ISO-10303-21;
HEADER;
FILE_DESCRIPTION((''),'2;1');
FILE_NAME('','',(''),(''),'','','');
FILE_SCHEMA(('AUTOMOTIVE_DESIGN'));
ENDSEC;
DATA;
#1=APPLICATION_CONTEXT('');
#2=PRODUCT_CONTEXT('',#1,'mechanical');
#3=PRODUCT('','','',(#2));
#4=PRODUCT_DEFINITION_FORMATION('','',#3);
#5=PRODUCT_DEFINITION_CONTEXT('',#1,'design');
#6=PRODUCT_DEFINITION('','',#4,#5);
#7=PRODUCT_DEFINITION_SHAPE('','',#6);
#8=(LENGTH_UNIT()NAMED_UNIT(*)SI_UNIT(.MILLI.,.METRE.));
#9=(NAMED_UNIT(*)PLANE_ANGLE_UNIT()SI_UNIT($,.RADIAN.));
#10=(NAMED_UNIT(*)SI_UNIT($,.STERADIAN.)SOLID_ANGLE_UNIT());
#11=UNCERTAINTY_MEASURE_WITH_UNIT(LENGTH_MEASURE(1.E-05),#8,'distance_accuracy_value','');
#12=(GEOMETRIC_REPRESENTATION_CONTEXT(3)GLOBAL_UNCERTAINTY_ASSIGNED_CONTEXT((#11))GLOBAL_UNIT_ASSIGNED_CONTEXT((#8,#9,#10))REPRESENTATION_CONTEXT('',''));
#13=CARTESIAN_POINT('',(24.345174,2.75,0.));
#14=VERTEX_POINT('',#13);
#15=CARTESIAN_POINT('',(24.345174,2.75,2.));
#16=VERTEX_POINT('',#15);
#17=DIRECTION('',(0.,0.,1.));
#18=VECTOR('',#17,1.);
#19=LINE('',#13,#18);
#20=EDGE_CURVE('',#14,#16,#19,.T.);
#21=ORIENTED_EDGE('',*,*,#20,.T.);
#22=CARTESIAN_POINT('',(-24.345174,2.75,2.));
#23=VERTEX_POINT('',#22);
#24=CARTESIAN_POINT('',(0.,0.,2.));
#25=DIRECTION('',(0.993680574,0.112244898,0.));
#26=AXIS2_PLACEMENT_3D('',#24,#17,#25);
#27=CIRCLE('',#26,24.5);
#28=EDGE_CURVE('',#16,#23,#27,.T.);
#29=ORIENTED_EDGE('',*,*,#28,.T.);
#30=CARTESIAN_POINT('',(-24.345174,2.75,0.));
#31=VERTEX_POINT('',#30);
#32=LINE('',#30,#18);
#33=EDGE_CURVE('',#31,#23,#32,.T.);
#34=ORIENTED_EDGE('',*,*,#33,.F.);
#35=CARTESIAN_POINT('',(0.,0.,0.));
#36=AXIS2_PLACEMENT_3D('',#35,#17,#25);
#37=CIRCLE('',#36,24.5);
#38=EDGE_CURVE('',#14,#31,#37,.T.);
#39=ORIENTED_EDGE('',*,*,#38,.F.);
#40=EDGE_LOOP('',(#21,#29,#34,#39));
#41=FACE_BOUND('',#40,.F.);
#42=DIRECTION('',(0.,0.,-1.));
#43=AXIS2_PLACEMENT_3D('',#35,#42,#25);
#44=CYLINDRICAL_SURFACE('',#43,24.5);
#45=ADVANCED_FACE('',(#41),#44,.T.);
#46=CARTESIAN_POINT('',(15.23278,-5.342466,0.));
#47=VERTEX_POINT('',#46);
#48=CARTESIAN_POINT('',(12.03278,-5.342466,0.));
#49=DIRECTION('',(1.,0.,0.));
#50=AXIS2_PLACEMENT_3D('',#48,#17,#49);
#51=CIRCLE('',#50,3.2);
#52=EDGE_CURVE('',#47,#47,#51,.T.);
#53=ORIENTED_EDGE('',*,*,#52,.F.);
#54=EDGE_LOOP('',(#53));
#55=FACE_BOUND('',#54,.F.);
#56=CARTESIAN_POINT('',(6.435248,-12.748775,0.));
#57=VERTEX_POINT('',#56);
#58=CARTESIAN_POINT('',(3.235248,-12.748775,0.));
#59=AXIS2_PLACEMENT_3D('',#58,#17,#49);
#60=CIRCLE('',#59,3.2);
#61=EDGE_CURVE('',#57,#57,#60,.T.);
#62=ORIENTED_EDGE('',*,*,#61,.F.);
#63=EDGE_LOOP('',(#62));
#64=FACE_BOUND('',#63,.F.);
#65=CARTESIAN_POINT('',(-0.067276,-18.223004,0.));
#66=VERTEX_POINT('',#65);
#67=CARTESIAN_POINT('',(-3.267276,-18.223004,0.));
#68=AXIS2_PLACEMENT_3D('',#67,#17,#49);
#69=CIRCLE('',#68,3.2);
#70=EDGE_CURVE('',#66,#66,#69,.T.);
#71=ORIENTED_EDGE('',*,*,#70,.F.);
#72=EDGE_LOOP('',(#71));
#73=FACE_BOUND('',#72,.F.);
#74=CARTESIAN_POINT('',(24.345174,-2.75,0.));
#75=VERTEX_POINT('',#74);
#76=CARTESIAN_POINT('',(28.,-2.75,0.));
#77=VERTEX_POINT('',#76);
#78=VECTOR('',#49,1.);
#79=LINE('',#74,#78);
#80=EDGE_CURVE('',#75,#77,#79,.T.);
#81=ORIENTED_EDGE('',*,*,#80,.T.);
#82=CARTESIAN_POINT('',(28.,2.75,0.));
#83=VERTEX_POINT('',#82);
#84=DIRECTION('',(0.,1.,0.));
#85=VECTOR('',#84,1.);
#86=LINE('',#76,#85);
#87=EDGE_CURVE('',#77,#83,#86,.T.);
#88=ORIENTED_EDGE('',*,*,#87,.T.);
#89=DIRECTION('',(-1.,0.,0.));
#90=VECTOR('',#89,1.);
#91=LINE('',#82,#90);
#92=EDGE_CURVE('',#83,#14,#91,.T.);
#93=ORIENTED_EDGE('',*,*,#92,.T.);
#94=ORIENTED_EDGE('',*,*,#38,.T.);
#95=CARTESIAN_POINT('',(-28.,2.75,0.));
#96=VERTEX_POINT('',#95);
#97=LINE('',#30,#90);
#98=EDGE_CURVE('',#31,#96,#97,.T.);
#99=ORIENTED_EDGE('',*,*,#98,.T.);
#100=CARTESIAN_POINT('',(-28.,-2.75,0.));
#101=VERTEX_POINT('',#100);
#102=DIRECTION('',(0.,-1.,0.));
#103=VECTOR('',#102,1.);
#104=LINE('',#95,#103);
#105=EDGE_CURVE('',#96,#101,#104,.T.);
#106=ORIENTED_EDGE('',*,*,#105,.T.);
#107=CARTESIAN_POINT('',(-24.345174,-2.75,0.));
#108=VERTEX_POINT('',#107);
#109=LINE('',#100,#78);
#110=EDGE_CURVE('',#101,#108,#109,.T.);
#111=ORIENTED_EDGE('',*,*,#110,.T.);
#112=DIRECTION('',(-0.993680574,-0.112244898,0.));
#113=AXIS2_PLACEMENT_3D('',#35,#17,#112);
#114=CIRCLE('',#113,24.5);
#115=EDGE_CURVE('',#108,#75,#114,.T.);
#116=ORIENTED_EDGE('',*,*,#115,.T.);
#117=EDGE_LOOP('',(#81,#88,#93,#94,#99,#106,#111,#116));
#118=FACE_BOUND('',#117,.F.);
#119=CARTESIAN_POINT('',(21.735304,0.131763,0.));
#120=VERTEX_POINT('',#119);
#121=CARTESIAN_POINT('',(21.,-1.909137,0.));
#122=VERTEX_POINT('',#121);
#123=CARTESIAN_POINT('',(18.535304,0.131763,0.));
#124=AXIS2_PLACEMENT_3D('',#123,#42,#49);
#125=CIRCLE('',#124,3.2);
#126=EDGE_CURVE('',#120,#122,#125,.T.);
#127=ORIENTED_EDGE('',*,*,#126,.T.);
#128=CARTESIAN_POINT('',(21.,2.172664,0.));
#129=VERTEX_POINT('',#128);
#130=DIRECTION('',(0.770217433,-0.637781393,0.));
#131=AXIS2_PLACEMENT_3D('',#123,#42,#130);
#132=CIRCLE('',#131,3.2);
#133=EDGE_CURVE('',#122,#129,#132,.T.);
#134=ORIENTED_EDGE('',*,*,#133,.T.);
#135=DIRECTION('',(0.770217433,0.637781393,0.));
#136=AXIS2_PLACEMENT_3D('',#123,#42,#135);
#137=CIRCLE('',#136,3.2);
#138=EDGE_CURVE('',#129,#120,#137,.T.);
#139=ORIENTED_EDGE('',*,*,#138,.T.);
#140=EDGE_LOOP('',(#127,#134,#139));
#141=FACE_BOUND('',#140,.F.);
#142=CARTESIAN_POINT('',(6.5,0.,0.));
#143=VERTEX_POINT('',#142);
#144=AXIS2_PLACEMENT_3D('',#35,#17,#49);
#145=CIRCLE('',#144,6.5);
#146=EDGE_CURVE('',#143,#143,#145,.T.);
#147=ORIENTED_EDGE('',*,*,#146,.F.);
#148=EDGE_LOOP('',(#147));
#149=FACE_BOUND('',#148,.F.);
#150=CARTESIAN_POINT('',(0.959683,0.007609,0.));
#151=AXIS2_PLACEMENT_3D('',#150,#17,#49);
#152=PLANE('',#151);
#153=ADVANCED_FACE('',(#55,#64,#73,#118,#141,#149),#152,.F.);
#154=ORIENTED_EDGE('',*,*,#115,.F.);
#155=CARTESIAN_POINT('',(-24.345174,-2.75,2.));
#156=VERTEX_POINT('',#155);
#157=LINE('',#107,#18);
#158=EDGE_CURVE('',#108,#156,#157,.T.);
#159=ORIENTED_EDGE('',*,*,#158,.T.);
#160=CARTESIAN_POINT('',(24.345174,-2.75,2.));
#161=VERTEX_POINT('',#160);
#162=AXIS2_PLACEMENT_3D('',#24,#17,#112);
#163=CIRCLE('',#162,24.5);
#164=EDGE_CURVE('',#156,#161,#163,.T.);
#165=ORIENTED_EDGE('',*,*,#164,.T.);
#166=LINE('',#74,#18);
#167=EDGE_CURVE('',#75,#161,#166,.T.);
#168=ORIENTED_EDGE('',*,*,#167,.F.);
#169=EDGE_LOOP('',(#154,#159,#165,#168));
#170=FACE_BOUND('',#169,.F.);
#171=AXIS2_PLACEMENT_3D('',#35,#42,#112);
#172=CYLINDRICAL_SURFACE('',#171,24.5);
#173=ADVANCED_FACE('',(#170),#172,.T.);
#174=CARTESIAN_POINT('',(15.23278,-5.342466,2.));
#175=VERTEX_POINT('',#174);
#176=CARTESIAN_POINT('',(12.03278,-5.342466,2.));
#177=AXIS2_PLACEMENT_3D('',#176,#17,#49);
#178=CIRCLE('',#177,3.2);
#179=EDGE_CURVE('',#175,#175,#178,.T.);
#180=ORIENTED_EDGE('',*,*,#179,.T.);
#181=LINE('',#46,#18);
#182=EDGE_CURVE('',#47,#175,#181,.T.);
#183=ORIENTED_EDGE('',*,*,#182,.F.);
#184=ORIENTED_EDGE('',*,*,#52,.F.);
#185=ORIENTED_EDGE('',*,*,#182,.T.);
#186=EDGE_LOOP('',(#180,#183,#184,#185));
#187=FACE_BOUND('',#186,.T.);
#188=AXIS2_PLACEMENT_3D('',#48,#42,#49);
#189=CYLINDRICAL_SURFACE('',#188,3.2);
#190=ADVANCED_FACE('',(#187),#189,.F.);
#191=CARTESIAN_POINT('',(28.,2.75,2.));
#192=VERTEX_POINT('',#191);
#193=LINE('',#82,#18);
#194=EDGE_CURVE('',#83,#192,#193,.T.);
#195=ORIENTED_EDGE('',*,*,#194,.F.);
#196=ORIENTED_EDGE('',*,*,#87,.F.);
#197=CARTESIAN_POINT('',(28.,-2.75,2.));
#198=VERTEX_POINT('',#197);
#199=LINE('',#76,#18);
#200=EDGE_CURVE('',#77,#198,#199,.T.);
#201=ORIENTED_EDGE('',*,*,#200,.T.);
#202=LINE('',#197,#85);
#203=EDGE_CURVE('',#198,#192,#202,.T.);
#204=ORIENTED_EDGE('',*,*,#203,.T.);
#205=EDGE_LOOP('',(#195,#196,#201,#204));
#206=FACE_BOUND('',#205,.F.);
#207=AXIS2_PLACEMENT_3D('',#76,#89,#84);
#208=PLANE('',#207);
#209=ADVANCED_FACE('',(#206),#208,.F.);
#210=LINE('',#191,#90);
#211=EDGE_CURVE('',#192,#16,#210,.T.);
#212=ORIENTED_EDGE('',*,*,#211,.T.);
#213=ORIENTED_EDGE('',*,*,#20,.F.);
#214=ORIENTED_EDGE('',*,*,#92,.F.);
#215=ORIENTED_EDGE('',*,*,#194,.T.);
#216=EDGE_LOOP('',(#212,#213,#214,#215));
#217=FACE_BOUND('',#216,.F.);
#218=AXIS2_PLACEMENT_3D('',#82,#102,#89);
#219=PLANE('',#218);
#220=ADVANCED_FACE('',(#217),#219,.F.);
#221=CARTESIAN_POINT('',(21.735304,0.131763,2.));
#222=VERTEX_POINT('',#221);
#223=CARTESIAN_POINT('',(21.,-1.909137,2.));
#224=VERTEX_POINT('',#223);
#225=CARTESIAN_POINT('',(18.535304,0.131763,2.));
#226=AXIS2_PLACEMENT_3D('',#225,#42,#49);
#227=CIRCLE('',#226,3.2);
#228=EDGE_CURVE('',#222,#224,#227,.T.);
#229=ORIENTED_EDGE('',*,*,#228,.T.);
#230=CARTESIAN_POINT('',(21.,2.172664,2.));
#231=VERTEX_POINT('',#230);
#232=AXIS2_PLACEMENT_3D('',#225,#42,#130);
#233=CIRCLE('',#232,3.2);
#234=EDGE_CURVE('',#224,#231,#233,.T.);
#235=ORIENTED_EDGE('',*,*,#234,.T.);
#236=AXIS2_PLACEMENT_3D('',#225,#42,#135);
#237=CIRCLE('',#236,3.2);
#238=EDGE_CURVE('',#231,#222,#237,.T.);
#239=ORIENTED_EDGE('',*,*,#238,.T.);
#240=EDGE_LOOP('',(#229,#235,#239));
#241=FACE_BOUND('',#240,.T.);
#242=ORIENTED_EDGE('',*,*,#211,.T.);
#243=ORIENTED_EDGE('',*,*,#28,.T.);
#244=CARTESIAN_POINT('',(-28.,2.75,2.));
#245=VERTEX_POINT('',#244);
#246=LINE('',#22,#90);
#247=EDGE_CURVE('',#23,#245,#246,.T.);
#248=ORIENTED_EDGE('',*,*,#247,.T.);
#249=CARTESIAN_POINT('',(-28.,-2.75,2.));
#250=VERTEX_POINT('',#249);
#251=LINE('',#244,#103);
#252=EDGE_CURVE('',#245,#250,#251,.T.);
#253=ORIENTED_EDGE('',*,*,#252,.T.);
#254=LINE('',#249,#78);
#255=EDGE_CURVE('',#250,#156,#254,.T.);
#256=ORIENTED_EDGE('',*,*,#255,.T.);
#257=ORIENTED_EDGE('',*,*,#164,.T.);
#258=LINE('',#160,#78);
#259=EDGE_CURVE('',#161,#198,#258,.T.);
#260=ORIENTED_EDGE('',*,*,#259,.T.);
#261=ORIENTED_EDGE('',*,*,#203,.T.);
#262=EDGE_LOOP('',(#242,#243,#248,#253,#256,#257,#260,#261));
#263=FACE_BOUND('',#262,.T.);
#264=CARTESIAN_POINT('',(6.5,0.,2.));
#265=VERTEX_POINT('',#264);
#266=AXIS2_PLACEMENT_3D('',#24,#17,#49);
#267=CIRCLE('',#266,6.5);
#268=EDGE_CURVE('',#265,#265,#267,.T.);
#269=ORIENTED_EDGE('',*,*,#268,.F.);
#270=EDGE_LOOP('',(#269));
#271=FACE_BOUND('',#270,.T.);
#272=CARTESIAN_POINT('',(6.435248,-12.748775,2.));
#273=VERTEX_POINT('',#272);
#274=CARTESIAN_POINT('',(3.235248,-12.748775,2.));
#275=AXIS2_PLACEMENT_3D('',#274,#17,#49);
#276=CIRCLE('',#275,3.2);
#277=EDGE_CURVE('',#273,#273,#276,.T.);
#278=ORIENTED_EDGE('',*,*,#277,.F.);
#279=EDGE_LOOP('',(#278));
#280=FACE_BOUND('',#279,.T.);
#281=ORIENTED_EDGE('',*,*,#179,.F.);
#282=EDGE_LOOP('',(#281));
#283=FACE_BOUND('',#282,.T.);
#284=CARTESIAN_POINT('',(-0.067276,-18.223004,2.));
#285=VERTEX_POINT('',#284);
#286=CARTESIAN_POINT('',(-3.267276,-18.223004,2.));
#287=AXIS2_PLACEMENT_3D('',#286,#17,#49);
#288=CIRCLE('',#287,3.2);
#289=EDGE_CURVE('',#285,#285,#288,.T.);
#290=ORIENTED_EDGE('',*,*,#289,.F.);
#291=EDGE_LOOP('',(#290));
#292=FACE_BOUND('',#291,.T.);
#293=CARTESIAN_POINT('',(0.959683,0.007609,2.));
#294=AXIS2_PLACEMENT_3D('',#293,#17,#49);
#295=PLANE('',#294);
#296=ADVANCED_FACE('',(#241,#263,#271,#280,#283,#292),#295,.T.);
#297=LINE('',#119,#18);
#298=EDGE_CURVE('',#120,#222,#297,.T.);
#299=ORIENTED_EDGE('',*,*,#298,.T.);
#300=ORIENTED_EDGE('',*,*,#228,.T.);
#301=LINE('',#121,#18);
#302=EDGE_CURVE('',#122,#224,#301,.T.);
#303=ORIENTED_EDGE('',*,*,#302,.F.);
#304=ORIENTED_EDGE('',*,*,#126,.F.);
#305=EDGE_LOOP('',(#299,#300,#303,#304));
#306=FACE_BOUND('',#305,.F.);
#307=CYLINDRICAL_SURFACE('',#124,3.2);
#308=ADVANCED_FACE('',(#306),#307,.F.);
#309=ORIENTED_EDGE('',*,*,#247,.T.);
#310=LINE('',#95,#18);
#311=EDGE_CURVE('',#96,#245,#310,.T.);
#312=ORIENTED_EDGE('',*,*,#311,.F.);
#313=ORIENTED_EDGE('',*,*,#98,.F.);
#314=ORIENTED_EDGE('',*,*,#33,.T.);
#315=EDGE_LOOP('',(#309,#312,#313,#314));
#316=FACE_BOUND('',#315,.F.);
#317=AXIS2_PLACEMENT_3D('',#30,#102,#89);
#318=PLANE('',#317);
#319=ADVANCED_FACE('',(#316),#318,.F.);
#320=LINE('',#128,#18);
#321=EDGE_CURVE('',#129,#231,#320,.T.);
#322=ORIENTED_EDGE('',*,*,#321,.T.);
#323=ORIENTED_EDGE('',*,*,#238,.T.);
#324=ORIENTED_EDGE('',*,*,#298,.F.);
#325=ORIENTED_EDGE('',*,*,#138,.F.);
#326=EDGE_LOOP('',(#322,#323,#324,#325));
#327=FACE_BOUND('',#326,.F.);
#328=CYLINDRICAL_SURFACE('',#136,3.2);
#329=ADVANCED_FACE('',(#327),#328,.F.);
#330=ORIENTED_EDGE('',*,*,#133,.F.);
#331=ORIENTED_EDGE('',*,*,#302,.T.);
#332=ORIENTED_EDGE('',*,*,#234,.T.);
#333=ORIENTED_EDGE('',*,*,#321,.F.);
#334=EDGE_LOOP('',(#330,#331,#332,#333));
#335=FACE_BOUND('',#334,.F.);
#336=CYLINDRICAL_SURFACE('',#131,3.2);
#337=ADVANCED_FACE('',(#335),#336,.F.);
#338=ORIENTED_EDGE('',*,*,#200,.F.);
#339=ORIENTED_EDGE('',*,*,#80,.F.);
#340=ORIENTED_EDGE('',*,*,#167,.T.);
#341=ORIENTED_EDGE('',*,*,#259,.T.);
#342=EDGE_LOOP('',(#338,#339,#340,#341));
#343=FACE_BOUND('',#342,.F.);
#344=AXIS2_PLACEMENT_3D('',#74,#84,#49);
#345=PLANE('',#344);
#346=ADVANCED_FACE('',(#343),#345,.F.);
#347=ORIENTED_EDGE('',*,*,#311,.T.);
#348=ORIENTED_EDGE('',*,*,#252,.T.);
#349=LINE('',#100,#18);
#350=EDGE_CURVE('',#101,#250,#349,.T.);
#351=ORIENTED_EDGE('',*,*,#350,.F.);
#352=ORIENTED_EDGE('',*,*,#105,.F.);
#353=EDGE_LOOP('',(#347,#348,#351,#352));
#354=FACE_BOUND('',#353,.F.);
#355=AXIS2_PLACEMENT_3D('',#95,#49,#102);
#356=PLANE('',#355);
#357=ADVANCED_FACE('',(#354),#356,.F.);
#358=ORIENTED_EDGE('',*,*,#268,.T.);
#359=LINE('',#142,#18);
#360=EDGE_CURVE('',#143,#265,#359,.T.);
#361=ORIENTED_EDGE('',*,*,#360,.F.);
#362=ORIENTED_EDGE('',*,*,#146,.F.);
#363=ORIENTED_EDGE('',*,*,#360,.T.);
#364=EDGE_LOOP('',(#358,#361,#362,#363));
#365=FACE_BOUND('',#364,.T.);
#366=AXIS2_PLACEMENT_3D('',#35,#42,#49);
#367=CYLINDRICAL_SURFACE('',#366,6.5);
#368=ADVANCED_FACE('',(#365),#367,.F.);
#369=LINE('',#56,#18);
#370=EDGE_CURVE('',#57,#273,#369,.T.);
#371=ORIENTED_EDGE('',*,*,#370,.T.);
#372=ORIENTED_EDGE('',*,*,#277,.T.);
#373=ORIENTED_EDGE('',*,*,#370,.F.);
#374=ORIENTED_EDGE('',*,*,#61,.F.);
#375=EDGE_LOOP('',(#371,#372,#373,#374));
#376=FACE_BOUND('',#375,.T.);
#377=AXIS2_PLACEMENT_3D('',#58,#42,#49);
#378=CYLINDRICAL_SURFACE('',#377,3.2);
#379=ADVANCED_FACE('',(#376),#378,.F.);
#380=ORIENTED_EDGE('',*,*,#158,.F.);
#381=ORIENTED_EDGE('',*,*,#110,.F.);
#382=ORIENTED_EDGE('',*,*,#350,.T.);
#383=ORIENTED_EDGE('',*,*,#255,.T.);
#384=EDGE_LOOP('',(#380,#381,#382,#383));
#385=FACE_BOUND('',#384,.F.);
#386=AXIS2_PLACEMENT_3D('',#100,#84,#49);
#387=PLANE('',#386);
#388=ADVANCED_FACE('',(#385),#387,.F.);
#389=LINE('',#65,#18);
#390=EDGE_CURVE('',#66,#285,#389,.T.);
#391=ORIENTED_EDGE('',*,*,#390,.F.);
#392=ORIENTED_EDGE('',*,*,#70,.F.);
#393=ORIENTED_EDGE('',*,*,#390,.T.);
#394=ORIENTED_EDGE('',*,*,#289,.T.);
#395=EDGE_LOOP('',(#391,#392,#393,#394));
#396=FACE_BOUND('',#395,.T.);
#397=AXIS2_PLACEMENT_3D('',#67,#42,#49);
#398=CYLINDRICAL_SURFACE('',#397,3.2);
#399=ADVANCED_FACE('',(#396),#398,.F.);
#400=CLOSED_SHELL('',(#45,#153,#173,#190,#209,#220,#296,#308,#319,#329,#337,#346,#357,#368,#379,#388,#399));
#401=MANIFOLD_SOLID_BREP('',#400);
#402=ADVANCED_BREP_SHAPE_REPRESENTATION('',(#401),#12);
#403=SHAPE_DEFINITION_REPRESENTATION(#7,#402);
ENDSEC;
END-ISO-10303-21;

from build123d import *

# Parameters (mm, degrees)
F0_R     = 3.2
F0_R_2   = 6.5
F1_DEPTH = 2


# Not quite as in the source:
# - a feature names something its author has since deleted; it is built from what else it names


with BuildPart() as f1:
    # F0 (on Top) → F1 (new body)
    with BuildSketch(Plane.XY):
        with BuildLine():
            Line((21, 2.75), (24.3451740598, 2.75))
            ThreePointArc((24.3451740598, 2.75), (0, 24.5), (-24.3451740598, 2.75))
            Line((-24.3451740598, 2.75), (-21, 2.75))
            Line((-21, 2.75), (-21, -2.75))
            Line((-21, -2.75), (-24.3451740598, -2.75))
            ThreePointArc((-24.3451740598, -2.75), (0, -24.5), (24.3451740598, -2.75))
            Line((24.3451740598, -2.75), (21, -2.75))
            Line((21, -2.75), (21, -1.9091370521))
            ThreePointArc((21, -1.9091370521), (15.3353042136, 0.1317634061), (21, 2.1726638643))
            Line((21, 2.1726638643), (21, 2.75))
        make_face()
        with Locations((-3.267275868, -18.2230044156)):
            Circle(F0_R, mode=Mode.SUBTRACT)
        with Locations((3.235248016, -12.7487754162)):
            Circle(F0_R, mode=Mode.SUBTRACT)
        Circle(F0_R_2, mode=Mode.SUBTRACT)
        with Locations((12.0327803296, -5.3424655934)):
            Circle(F0_R, mode=Mode.SUBTRACT)
        with BuildLine():
            Line((-21, 2.75), (-24.3451740598, 2.75))
            ThreePointArc((-24.3451740598, 2.75), (-24.5, 0), (-24.3451740598, -2.75))
            Line((-24.3451740598, -2.75), (-21, -2.75))
            Line((-21, -2.75), (-21, 2.75))
        make_face()
        with BuildLine():
            ThreePointArc((-24.3451740598, -2.75), (-24.5, 0), (-24.3451740598, 2.75))
            Line((-24.3451740598, 2.75), (-28, 2.75))
            Line((-28, 2.75), (-28, -2.75))
            Line((-28, -2.75), (-24.3451740598, -2.75))
        make_face()
        with BuildLine():
            ThreePointArc((24.3451740598, -2.75), (24.4612628912, -1.3771774642), (24.5, 0))
            ThreePointArc((24.5, 0), (24.4612628912, 1.3771774642), (24.3451740598, 2.75))
            Line((24.3451740598, 2.75), (21, 2.75))
            Line((21, 2.75), (21, 2.1726638643))
            ThreePointArc((21, 2.1726638643), (21.5458711466, 1.2164231415), (21.7353042136, 0.1317634061))
            ThreePointArc((21.7353042136, 0.1317634061), (21.5458711466, -0.9528963294), (21, -1.9091370521))
            Line((21, -1.9091370521), (21, -2.75))
            Line((21, -2.75), (24.3451740598, -2.75))
        make_face()
        with BuildLine():
            ThreePointArc((24.3451740598, 2.75), (24.4612628912, 1.3771774642), (24.5, 0))
            ThreePointArc((24.5, 0), (24.4612628912, -1.3771774642), (24.3451740598, -2.75))
            Line((24.3451740598, -2.75), (28, -2.75))
            Line((28, -2.75), (28, 2.75))
            Line((28, 2.75), (24.3451740598, 2.75))
        make_face()
    extrude(amount=F1_DEPTH)


solid = f1.part
